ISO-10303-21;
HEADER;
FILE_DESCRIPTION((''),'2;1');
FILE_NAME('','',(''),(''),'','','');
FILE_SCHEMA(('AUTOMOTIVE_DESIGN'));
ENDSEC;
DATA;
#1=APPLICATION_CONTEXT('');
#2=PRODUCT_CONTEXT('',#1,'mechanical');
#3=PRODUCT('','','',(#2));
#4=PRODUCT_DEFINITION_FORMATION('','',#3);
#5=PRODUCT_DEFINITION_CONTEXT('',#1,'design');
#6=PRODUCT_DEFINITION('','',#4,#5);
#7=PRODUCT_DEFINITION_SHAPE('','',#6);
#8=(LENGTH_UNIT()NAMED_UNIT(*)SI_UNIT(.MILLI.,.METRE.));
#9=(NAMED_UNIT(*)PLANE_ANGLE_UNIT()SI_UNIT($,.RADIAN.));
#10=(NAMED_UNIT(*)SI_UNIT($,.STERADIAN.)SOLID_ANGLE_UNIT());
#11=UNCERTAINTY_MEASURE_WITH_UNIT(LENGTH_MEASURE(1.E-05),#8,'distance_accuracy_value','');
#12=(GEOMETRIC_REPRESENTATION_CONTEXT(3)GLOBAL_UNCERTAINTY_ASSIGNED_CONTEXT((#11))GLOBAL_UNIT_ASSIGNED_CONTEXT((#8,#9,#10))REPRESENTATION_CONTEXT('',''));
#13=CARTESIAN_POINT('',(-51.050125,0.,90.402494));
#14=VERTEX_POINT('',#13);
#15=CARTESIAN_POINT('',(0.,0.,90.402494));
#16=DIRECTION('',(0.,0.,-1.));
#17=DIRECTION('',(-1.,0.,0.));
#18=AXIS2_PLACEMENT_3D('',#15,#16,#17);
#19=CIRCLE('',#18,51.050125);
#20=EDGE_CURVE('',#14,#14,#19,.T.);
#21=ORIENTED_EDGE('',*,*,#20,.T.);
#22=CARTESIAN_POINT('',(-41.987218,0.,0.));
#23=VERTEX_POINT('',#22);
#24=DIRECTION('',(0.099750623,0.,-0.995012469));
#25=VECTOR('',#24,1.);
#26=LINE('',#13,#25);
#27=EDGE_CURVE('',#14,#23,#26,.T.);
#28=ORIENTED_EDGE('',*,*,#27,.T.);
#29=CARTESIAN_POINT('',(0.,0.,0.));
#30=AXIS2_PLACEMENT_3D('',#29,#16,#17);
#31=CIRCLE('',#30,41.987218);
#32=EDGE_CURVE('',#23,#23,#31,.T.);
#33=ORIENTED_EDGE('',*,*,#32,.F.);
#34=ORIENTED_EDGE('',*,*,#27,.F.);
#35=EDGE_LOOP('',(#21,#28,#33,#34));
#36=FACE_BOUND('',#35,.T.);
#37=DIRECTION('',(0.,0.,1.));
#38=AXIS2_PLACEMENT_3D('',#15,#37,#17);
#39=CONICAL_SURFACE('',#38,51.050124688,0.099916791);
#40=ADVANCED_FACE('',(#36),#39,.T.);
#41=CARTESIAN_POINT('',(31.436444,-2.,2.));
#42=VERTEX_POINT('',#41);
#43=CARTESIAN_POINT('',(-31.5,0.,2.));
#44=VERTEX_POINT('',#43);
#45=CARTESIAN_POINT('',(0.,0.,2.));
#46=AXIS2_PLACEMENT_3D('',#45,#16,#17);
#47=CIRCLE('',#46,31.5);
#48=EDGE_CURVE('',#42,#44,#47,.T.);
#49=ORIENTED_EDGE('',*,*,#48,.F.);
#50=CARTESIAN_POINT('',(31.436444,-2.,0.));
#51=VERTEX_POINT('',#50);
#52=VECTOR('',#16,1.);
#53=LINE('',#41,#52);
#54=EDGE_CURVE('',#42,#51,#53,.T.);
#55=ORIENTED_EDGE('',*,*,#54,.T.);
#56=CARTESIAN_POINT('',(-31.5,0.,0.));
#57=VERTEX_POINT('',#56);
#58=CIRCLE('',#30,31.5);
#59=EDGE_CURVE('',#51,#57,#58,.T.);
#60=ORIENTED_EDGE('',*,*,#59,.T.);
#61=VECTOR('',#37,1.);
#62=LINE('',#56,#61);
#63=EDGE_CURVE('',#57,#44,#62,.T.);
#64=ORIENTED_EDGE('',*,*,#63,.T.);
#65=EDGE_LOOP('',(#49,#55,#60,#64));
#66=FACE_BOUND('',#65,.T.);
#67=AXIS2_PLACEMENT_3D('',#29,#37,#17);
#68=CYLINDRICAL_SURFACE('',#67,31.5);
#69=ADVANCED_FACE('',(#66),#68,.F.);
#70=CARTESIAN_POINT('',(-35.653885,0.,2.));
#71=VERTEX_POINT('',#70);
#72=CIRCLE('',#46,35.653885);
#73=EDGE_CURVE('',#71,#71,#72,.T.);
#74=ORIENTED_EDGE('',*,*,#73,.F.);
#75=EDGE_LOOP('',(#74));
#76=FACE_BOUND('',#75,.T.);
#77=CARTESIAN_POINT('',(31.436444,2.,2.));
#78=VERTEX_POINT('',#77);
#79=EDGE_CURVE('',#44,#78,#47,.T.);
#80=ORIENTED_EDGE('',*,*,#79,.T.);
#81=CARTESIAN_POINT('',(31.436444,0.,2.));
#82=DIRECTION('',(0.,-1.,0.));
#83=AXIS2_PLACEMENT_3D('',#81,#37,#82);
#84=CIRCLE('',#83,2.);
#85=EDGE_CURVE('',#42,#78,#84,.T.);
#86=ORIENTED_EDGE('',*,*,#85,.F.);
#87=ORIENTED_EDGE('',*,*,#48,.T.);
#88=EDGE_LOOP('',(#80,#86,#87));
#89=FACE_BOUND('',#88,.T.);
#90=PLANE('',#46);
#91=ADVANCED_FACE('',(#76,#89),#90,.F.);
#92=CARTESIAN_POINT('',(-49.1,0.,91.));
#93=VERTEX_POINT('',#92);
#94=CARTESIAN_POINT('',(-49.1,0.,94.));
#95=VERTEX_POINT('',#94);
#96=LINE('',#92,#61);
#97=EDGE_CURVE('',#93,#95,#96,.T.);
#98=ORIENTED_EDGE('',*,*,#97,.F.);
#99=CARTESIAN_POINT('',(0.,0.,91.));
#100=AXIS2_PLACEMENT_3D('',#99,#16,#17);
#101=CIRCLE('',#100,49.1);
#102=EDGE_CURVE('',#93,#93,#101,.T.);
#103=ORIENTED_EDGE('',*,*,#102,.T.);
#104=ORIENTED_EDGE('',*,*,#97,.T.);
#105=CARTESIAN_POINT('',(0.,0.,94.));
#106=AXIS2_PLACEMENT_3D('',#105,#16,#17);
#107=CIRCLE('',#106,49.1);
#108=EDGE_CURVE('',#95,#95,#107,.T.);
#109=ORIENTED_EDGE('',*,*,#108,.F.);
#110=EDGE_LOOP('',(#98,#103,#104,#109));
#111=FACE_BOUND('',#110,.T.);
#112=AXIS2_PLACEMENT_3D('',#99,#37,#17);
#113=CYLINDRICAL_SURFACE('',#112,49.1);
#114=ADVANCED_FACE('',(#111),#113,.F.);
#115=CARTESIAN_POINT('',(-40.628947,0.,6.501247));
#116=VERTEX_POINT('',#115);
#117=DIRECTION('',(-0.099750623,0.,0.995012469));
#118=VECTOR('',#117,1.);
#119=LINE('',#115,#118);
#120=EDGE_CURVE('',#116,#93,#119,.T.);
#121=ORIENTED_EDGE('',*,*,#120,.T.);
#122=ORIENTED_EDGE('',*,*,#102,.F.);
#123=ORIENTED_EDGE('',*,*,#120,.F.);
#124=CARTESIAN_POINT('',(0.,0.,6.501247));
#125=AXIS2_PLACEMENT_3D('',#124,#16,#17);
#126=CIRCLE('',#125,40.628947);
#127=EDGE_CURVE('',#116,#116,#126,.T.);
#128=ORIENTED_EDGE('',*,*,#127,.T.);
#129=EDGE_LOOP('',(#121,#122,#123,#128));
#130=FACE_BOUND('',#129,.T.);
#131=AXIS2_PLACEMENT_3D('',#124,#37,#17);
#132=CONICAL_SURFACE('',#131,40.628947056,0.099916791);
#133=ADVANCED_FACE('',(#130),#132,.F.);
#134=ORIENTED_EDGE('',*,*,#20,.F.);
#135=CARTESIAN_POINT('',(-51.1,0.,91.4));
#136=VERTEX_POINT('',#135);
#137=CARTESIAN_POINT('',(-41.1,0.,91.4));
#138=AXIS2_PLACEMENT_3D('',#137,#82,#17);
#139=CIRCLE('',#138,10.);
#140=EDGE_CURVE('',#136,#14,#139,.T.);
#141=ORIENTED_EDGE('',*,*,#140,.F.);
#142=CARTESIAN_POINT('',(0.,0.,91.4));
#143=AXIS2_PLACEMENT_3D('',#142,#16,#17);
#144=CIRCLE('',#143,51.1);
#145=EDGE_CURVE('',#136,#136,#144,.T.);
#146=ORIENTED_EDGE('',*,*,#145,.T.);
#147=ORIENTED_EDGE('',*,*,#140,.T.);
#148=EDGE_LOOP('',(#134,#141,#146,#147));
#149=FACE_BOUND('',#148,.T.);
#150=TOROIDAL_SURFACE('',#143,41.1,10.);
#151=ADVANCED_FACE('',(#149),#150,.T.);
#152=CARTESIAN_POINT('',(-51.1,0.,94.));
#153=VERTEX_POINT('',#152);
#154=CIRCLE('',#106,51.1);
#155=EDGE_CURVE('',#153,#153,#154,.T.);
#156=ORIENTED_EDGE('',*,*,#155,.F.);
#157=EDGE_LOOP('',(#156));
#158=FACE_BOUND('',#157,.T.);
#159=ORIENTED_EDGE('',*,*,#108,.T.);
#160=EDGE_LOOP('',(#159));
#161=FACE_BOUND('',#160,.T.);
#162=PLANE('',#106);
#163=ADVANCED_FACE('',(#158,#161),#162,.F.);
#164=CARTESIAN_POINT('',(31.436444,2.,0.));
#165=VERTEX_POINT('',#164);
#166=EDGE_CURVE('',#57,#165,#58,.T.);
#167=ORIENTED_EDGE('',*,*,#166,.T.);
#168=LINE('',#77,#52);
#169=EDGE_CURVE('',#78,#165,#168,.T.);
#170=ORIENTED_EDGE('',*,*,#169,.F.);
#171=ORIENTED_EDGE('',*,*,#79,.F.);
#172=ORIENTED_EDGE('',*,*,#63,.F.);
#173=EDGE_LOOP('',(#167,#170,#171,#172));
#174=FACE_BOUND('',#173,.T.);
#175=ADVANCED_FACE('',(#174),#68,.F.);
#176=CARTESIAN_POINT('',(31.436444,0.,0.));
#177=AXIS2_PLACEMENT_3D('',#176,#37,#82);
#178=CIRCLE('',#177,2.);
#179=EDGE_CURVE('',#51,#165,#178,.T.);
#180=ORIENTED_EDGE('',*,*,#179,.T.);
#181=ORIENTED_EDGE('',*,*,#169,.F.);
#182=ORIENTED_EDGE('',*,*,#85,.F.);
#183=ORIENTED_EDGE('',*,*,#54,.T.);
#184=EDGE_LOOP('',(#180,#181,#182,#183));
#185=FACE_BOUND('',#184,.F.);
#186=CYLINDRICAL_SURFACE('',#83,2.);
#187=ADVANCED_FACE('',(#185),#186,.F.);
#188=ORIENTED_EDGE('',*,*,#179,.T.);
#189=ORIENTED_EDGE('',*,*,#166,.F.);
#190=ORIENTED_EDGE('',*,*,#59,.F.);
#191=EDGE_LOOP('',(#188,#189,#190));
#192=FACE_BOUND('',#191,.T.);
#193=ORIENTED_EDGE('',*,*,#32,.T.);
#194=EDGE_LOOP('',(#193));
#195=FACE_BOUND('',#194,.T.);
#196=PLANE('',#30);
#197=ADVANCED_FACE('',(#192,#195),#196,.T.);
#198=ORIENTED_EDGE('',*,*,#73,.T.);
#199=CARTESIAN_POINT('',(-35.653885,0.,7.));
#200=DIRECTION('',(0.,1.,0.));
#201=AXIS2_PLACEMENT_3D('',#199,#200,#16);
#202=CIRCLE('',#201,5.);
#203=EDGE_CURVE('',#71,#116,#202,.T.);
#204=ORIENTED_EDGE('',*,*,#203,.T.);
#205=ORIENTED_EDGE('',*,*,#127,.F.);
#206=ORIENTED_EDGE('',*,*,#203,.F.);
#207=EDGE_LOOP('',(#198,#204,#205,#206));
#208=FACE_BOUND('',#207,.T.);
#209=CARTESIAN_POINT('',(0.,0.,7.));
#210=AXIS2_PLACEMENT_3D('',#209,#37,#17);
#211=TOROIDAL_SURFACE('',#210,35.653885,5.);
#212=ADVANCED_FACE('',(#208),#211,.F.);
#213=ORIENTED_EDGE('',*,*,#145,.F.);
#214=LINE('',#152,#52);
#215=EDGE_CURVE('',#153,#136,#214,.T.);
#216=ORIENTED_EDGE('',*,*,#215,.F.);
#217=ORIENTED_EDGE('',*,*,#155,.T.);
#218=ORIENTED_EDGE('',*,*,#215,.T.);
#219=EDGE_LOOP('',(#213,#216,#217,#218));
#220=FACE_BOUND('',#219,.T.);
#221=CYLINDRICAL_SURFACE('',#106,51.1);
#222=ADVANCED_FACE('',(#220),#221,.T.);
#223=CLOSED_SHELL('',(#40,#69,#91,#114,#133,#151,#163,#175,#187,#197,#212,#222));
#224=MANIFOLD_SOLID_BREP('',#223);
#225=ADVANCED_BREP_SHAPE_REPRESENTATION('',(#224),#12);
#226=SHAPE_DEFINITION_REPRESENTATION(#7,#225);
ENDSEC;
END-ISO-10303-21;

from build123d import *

# Parameters (mm, degrees)
F3_DEPTH = 2.001


with BuildPart() as f1:
    # F0 (on Front) → F1 (revolve)
    with BuildSketch(Plane.XZ):
        with BuildLine():
            Line((-41.9872180451, 0), (-31.5, 0))
            Line((-31.5, 0), (-31.5, 2))
            Line((-31.5, 2), (-35.6538847118, 2))
            ThreePointArc((-35.6538847118, 2), (-39.0084513316, 3.2923211044), (-40.6289470559, 6.5012468828))
            Line((-40.6289470559, 6.5012468828), (-49.1, 91))
            Line((-49.1, 91), (-49.1, 94))
            Line((-49.1, 94), (-51.1, 94))
            Line((-51.1, 94), (-51.1, 91.4))
            ThreePointArc((-51.1, 91.4), (-51.0875233888, 90.9006238306), (-51.0501246883, 90.4024937656))
            Line((-51.0501246883, 90.4024937656), (-41.9872180451, 0))
        make_face()
    revolve(axis=Axis((0, 0, -11.3997804001), (0, 0, -1)))

    # F2 (on face) → F3 (cut, through all)
    with BuildSketch(Plane.XY.offset(2)):
        with BuildLine():
            ThreePointArc((31.5, 0), (31.4841069455, -1.0005047961), (31.4364438192, -2))
            ThreePointArc((31.4364438192, -2), (33.4364438192, 0), (31.4364438192, 2))
            ThreePointArc((31.4364438192, 2), (31.4841069455, 1.0005047961), (31.5, 0))
        make_face()
    extrude(amount=-F3_DEPTH, mode=Mode.SUBTRACT)


solid = f1.part
